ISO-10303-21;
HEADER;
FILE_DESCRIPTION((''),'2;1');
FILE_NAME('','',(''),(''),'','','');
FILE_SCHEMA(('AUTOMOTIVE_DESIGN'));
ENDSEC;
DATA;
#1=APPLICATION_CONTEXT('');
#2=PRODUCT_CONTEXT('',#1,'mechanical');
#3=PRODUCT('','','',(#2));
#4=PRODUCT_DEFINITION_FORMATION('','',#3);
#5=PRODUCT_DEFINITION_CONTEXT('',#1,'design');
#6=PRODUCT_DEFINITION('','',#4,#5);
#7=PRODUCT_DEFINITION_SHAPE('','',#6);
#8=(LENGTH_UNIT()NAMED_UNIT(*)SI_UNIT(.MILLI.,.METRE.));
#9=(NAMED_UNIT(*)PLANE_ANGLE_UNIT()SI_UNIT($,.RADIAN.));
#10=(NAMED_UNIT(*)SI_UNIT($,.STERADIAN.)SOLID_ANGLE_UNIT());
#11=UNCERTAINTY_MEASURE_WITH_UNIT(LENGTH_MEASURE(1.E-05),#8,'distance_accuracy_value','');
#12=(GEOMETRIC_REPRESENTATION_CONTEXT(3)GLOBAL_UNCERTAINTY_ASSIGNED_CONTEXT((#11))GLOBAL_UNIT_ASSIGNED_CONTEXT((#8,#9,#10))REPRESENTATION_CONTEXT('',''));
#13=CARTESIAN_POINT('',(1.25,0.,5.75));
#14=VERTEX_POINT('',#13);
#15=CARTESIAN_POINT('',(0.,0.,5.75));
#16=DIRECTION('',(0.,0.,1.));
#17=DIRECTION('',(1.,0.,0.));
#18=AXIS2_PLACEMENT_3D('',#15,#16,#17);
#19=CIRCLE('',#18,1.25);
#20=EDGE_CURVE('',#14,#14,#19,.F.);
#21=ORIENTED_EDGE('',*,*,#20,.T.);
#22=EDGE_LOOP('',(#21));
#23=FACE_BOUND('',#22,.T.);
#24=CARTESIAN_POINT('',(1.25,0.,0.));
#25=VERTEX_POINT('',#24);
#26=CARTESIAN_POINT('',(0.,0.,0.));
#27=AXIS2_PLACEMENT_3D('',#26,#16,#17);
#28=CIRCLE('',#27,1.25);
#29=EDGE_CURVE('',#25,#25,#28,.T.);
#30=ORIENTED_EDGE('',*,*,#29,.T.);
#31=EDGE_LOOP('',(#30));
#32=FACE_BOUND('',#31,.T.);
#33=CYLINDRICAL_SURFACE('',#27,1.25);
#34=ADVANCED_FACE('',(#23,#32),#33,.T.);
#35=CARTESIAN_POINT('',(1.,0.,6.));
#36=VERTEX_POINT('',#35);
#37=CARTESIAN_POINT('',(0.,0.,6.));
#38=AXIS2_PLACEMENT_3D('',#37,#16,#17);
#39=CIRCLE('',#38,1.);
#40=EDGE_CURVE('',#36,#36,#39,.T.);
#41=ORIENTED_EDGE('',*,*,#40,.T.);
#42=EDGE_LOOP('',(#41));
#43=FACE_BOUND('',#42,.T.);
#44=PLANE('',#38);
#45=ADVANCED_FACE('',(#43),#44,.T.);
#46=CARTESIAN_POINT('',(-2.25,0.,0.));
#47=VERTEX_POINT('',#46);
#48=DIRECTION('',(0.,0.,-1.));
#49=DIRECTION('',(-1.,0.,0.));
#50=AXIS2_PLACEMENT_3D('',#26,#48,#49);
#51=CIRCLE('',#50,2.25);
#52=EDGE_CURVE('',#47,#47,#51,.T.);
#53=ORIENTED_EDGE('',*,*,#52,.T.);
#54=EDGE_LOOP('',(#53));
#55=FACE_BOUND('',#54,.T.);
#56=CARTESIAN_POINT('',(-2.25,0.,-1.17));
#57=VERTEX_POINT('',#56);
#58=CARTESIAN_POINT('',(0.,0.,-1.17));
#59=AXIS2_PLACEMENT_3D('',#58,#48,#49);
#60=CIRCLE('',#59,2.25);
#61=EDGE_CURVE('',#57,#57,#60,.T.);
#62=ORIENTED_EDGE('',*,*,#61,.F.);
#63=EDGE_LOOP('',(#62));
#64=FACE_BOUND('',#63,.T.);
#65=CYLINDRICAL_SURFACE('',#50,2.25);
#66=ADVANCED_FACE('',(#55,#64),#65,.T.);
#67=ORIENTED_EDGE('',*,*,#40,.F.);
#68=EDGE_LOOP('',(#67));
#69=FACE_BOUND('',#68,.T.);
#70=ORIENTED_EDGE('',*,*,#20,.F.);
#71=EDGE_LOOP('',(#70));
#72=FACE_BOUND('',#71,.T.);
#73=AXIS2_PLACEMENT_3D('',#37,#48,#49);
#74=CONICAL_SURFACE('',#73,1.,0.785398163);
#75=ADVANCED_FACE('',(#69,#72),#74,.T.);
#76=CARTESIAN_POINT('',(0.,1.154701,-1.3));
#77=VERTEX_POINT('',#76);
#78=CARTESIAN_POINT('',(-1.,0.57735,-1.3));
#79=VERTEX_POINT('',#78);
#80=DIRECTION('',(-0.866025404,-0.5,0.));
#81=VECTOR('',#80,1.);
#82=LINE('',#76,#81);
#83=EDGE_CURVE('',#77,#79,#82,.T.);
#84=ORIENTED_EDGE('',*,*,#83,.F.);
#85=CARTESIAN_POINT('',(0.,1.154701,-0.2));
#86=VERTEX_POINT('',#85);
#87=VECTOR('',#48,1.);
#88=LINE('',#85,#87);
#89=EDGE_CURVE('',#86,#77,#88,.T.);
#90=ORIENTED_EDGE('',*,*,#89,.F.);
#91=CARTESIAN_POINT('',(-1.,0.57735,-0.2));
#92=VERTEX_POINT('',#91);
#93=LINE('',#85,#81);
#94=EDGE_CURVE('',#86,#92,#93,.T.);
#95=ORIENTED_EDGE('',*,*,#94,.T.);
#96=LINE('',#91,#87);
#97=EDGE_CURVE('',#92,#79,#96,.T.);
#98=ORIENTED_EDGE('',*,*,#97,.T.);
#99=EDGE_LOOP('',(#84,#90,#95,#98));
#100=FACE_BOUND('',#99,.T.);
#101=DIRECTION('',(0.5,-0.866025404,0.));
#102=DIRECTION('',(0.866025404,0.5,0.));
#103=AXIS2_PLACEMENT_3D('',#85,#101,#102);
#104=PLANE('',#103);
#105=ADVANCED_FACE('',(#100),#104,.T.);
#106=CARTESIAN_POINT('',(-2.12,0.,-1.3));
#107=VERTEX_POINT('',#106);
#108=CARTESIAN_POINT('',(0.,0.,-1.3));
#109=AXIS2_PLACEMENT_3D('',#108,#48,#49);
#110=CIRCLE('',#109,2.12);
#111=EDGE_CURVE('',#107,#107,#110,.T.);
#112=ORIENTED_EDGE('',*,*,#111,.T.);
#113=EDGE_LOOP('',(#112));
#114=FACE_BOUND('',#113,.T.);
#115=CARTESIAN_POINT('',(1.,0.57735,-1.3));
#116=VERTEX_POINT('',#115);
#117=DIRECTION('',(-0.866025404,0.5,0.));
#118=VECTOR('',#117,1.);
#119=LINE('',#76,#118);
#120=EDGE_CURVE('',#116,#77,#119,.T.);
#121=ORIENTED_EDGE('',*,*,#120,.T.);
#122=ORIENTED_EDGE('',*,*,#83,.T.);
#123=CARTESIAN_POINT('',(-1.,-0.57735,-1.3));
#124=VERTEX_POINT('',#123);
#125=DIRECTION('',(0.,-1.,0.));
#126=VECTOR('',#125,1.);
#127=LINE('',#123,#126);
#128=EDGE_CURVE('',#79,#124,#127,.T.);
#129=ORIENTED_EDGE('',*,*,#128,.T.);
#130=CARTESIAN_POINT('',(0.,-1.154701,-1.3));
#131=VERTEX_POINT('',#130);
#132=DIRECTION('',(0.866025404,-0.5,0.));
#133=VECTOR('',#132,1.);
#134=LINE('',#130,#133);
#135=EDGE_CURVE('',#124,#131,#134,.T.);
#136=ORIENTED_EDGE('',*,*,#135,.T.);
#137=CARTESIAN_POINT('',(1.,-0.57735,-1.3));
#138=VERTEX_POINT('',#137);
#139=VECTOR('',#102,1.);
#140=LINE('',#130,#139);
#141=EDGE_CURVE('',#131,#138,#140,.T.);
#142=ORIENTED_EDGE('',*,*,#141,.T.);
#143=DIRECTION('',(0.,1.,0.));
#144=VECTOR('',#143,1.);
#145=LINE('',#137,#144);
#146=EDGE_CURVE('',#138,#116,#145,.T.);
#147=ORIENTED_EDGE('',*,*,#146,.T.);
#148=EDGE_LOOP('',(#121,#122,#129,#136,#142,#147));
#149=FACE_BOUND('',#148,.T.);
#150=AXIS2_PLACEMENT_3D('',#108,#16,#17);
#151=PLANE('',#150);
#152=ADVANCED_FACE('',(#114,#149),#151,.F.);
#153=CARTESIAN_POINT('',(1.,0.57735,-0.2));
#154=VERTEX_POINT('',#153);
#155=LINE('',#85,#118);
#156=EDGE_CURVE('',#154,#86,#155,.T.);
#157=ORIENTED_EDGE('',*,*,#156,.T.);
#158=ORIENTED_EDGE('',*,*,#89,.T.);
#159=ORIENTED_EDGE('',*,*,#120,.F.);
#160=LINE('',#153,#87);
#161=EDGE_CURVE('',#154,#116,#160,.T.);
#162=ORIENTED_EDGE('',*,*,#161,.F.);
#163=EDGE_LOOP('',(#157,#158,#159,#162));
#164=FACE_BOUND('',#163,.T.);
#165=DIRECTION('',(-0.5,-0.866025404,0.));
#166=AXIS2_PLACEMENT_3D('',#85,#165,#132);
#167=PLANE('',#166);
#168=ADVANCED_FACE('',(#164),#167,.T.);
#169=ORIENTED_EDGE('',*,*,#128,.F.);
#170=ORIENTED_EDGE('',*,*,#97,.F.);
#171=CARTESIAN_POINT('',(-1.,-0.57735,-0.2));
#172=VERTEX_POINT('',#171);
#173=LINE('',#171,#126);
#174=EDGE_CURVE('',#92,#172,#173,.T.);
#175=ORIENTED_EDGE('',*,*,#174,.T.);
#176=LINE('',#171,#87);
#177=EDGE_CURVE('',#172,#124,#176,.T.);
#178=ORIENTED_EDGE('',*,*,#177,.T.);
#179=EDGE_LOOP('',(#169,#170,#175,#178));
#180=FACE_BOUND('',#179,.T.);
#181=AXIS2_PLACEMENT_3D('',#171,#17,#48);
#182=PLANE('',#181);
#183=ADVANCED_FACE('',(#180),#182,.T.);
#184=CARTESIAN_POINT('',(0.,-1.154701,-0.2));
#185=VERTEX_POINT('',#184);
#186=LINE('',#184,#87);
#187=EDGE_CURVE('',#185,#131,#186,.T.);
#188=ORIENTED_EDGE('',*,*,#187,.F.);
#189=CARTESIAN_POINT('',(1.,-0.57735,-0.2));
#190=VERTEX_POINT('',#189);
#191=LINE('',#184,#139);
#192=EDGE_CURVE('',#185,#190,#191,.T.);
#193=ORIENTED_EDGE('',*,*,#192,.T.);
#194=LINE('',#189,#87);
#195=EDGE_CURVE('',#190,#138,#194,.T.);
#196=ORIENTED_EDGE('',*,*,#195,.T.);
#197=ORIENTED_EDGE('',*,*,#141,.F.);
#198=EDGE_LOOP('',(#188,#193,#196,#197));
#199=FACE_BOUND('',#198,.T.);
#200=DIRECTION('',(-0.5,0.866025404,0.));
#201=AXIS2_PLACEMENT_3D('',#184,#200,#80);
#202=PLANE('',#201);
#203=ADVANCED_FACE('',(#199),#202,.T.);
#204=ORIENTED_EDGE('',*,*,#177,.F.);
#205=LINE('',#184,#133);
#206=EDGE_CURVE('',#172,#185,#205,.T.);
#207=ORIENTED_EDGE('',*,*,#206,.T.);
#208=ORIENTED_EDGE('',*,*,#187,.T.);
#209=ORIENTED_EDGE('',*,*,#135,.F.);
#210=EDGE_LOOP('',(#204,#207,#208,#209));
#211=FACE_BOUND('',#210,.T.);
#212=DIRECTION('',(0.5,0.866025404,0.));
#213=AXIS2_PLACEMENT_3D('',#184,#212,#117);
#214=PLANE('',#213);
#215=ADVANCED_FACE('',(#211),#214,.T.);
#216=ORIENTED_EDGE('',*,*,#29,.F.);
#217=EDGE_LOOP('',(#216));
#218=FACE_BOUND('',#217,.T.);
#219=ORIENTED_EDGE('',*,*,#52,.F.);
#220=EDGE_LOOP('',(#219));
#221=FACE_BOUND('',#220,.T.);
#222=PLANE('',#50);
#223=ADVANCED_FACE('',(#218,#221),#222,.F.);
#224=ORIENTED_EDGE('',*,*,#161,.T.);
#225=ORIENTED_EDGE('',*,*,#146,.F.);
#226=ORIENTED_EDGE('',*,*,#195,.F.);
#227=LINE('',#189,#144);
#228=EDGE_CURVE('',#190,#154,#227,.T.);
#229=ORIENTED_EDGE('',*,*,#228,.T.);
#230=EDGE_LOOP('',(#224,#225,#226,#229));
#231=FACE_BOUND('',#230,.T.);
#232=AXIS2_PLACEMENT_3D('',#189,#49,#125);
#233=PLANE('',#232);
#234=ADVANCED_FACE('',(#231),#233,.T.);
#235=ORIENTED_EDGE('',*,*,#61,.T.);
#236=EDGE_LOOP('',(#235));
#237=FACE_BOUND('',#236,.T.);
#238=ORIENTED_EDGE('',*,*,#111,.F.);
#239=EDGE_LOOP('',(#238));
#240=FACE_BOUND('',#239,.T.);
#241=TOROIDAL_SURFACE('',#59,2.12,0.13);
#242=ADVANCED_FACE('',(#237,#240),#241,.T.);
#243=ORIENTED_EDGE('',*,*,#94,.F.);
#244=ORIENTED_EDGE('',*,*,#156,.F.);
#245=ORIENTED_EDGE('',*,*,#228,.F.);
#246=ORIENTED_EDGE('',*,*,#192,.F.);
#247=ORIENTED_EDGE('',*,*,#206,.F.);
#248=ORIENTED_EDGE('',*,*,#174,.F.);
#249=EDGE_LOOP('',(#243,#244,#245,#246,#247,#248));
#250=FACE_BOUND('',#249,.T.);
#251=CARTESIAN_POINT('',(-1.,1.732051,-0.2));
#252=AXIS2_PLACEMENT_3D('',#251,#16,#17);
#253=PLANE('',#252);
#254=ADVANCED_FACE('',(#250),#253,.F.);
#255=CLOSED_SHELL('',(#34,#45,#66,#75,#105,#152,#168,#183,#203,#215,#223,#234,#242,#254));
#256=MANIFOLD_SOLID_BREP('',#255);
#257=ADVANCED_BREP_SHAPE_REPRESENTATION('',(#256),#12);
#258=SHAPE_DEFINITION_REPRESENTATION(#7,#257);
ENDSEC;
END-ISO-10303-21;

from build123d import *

# Parameters (mm, degrees)
ENLEV_MAT_EXTRU1_DEPTH = 1.1
ESQUISSE3_W            = 1.25
ESQUISSE3_H            = 6
CHANFREIN1_SIZE        = 0.25


with BuildPart() as part:
    # Esquisse1 → Base-Révolution (revolve)
    with BuildSketch(Plane(origin=(0, 0, 0), x_dir=(1, 0, 0), z_dir=(0, 1, 0)), mode=Mode.PRIVATE) as base_r_volution_sk:
        with BuildLine():
            Line((0, 0), (2.25, 0))
            Line((2.25, 0), (2.25, 1.17))
            ThreePointArc((2.25, 1.17), (2.211923882, 1.261923882), (2.12, 1.3))
            Line((2.12, 1.3), (0, 1.3))
            Line((0, 1.3), (0, 0))
        make_face()
    revolve(base_r_volution_sk.sketch.rotate(Axis((0, 0, 0), (0, 0, -1)), 180), axis=Axis((0, 0, 0), (0, 0, -1)))

    # Esquisse2 → enlev-mat-Extru1 (cut)
    with BuildSketch(Plane.XY.offset(-1.3)):
        Polygon((1, -0.577350269), (1, 0.577350269), (0, 1.154700538), (-1, 0.577350269), (-1, -0.577350269), (0, -1.154700538), align=None)
    extrude(amount=ENLEV_MAT_EXTRU1_DEPTH, mode=Mode.SUBTRACT)

    # Esquisse3 → Boss.-Révol.1 (revolve)
    with BuildSketch(Plane(origin=(0, 0, 0), x_dir=(1, 0, 0), z_dir=(0, 1, 0))):
        with Locations((0.625, -3)):
            Rectangle(ESQUISSE3_W, ESQUISSE3_H)
    revolve(axis=Axis((0, 0, 0), (0, 0, 1)))

    # Chanfrein1
    chanfrein1_edges = [part.edges().sort_by_distance(p)[0] for p in [
        (-1.25, 0, 6),
    ]]
    chamfer(chanfrein1_edges, length=CHANFREIN1_SIZE)


solid = part.part
